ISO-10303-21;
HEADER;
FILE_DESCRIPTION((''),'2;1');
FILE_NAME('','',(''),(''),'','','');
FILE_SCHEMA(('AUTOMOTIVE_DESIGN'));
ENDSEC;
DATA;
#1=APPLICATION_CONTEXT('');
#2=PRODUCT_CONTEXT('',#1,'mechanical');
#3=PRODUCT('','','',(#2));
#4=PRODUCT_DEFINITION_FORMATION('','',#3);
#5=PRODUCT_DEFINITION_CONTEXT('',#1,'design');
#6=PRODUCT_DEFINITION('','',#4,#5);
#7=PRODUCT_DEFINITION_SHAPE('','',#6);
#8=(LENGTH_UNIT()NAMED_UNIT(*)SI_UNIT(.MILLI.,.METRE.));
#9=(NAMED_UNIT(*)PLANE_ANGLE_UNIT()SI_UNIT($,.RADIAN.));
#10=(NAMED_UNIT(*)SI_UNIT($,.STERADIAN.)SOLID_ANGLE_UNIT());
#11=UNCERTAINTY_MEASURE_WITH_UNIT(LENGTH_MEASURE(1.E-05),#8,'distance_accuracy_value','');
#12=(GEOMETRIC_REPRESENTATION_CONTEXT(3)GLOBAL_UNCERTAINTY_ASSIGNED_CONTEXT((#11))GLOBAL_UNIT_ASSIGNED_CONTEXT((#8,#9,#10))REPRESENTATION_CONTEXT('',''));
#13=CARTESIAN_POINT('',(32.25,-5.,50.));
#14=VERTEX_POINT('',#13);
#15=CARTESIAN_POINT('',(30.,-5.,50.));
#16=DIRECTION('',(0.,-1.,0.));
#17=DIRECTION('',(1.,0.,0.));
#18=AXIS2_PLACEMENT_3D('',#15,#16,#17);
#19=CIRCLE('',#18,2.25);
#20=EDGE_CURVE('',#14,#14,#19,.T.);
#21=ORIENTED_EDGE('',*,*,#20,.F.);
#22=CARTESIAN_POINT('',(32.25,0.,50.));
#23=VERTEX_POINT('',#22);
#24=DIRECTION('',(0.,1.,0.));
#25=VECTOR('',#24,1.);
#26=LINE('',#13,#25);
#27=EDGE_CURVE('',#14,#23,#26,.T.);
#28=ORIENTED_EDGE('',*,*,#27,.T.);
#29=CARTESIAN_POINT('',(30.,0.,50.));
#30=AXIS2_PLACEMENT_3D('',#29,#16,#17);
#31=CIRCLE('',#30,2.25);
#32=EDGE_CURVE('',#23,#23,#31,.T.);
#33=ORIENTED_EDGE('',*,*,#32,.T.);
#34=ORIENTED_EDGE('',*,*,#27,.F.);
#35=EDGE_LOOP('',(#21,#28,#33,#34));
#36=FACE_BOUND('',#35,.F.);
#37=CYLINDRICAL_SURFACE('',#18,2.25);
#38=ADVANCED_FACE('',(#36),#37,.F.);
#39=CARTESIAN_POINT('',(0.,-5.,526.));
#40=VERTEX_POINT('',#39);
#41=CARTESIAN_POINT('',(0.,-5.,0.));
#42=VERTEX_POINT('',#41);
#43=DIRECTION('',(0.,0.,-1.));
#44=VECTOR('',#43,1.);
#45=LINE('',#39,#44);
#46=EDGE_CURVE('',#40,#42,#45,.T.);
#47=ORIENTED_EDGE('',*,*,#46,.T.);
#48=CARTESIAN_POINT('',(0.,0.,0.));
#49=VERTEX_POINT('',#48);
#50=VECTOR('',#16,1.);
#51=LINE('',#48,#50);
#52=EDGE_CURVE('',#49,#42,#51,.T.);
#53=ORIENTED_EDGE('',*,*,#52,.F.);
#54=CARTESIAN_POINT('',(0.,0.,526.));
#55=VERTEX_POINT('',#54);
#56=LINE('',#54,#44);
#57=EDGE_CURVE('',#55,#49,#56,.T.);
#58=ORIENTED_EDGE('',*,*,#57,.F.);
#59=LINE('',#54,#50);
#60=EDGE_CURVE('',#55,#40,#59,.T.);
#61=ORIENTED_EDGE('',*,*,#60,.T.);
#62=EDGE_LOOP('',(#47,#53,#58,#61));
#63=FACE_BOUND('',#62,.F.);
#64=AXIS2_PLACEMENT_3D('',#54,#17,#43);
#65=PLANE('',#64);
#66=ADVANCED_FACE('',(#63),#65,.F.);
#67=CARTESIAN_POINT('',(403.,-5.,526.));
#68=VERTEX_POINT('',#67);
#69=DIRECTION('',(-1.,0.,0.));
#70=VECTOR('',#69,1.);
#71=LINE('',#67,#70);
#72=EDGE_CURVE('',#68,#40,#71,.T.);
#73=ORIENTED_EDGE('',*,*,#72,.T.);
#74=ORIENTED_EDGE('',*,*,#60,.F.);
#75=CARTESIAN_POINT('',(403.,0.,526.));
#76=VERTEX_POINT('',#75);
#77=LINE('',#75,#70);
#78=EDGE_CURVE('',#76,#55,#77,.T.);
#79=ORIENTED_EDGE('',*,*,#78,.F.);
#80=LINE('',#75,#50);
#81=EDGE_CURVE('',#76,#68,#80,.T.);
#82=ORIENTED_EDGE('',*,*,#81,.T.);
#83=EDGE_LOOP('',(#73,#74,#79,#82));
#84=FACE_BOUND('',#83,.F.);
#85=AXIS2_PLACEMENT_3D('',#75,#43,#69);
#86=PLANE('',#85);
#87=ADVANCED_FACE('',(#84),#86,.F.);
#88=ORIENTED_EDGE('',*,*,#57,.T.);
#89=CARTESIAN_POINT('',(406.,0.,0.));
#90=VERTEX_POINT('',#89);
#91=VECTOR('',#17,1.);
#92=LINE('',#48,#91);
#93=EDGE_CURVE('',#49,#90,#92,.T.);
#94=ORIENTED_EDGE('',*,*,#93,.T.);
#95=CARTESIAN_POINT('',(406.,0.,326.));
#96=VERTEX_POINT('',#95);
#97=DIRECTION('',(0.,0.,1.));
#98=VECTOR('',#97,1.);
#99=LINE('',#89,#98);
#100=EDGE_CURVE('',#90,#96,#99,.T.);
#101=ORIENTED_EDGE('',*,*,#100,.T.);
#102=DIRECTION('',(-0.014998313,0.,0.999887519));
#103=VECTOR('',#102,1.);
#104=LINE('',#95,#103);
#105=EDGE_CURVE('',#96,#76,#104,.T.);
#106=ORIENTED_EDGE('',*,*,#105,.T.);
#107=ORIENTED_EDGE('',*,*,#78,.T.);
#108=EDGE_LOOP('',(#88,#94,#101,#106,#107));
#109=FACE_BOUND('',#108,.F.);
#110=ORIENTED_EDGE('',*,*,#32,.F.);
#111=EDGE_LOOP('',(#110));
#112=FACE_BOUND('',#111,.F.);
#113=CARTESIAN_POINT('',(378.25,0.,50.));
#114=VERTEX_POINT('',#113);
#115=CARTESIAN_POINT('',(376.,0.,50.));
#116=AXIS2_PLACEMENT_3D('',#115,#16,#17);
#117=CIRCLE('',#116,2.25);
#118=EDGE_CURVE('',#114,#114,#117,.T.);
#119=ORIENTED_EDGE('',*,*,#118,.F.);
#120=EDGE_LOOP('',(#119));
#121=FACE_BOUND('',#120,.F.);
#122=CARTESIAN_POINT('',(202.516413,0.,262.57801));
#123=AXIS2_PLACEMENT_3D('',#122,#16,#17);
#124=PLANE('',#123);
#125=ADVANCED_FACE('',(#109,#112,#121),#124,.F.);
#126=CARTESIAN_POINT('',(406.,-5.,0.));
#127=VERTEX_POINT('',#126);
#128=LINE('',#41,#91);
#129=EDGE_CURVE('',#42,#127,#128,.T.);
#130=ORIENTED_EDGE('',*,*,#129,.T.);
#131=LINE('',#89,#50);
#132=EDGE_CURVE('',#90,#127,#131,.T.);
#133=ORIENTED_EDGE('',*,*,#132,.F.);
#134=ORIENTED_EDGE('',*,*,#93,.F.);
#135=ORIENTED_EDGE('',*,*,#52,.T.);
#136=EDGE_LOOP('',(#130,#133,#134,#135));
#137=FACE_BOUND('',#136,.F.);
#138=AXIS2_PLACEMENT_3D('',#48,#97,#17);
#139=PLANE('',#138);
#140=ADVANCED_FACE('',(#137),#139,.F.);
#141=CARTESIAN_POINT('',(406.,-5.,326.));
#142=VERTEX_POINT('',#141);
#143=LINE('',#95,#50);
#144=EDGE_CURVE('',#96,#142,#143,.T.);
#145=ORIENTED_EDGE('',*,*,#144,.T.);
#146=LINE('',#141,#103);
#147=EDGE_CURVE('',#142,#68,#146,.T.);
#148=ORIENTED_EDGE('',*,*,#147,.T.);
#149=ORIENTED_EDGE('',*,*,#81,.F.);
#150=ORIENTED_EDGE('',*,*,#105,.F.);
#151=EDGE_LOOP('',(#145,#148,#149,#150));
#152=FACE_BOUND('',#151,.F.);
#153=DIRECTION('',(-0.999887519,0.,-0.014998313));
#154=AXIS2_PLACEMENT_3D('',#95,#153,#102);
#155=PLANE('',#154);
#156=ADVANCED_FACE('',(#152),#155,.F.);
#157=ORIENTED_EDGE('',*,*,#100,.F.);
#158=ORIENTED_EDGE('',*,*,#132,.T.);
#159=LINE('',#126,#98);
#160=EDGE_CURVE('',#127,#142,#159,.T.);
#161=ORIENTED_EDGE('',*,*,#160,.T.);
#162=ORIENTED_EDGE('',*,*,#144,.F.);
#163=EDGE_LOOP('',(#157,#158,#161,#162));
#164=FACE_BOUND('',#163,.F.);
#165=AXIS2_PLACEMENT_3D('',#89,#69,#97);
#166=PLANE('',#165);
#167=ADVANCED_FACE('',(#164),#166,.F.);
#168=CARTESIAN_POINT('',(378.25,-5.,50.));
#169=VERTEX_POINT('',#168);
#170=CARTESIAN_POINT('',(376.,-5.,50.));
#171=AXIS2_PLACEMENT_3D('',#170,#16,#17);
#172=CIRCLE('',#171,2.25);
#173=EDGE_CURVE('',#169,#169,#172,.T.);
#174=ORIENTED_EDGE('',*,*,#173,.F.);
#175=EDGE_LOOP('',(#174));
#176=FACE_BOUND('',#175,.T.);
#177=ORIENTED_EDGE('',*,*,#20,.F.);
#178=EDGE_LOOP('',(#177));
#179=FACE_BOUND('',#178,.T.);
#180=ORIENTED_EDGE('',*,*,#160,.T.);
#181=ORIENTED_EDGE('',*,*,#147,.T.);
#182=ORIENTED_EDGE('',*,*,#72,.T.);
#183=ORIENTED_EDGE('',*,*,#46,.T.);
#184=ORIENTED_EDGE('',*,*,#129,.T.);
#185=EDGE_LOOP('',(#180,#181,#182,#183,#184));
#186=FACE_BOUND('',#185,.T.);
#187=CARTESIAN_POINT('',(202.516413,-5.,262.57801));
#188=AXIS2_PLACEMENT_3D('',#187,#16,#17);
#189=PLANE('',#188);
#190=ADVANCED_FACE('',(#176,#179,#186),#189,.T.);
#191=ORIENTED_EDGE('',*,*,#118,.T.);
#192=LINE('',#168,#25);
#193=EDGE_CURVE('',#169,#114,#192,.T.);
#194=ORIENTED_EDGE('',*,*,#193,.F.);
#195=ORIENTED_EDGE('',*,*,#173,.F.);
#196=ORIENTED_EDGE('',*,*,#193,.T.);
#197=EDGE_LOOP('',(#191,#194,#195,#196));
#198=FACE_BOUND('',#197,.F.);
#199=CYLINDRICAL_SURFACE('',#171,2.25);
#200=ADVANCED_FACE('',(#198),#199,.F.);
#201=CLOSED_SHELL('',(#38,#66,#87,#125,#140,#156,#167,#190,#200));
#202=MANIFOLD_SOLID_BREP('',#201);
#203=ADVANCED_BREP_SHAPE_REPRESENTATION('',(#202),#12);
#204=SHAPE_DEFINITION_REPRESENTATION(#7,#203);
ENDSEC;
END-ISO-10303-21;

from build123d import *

# Parameters (mm, degrees)
F1_DEPTH = 5
F2_R     = 2.25
F3_DEPTH = 5


# Not quite as in the source:
# - a feature names something its author has since deleted; it is built from what else it names


with BuildPart() as f1:
    # F0 (on Front) → F1 (new body)
    with BuildSketch(Plane.XZ):
        Polygon((0, 526), (0, 0), (406, 0), (406, 326), (403, 526), align=None)
    extrude(amount=F1_DEPTH)

    # F2 (on face) → F3 (cut, through all)
    with BuildSketch(Plane.XZ.offset(5)):
        with Locations((30, 50)):
            Circle(F2_R)
        with Locations((376, 50)):
            Circle(F2_R)
    extrude(amount=-F3_DEPTH, mode=Mode.SUBTRACT)


solid = f1.part
